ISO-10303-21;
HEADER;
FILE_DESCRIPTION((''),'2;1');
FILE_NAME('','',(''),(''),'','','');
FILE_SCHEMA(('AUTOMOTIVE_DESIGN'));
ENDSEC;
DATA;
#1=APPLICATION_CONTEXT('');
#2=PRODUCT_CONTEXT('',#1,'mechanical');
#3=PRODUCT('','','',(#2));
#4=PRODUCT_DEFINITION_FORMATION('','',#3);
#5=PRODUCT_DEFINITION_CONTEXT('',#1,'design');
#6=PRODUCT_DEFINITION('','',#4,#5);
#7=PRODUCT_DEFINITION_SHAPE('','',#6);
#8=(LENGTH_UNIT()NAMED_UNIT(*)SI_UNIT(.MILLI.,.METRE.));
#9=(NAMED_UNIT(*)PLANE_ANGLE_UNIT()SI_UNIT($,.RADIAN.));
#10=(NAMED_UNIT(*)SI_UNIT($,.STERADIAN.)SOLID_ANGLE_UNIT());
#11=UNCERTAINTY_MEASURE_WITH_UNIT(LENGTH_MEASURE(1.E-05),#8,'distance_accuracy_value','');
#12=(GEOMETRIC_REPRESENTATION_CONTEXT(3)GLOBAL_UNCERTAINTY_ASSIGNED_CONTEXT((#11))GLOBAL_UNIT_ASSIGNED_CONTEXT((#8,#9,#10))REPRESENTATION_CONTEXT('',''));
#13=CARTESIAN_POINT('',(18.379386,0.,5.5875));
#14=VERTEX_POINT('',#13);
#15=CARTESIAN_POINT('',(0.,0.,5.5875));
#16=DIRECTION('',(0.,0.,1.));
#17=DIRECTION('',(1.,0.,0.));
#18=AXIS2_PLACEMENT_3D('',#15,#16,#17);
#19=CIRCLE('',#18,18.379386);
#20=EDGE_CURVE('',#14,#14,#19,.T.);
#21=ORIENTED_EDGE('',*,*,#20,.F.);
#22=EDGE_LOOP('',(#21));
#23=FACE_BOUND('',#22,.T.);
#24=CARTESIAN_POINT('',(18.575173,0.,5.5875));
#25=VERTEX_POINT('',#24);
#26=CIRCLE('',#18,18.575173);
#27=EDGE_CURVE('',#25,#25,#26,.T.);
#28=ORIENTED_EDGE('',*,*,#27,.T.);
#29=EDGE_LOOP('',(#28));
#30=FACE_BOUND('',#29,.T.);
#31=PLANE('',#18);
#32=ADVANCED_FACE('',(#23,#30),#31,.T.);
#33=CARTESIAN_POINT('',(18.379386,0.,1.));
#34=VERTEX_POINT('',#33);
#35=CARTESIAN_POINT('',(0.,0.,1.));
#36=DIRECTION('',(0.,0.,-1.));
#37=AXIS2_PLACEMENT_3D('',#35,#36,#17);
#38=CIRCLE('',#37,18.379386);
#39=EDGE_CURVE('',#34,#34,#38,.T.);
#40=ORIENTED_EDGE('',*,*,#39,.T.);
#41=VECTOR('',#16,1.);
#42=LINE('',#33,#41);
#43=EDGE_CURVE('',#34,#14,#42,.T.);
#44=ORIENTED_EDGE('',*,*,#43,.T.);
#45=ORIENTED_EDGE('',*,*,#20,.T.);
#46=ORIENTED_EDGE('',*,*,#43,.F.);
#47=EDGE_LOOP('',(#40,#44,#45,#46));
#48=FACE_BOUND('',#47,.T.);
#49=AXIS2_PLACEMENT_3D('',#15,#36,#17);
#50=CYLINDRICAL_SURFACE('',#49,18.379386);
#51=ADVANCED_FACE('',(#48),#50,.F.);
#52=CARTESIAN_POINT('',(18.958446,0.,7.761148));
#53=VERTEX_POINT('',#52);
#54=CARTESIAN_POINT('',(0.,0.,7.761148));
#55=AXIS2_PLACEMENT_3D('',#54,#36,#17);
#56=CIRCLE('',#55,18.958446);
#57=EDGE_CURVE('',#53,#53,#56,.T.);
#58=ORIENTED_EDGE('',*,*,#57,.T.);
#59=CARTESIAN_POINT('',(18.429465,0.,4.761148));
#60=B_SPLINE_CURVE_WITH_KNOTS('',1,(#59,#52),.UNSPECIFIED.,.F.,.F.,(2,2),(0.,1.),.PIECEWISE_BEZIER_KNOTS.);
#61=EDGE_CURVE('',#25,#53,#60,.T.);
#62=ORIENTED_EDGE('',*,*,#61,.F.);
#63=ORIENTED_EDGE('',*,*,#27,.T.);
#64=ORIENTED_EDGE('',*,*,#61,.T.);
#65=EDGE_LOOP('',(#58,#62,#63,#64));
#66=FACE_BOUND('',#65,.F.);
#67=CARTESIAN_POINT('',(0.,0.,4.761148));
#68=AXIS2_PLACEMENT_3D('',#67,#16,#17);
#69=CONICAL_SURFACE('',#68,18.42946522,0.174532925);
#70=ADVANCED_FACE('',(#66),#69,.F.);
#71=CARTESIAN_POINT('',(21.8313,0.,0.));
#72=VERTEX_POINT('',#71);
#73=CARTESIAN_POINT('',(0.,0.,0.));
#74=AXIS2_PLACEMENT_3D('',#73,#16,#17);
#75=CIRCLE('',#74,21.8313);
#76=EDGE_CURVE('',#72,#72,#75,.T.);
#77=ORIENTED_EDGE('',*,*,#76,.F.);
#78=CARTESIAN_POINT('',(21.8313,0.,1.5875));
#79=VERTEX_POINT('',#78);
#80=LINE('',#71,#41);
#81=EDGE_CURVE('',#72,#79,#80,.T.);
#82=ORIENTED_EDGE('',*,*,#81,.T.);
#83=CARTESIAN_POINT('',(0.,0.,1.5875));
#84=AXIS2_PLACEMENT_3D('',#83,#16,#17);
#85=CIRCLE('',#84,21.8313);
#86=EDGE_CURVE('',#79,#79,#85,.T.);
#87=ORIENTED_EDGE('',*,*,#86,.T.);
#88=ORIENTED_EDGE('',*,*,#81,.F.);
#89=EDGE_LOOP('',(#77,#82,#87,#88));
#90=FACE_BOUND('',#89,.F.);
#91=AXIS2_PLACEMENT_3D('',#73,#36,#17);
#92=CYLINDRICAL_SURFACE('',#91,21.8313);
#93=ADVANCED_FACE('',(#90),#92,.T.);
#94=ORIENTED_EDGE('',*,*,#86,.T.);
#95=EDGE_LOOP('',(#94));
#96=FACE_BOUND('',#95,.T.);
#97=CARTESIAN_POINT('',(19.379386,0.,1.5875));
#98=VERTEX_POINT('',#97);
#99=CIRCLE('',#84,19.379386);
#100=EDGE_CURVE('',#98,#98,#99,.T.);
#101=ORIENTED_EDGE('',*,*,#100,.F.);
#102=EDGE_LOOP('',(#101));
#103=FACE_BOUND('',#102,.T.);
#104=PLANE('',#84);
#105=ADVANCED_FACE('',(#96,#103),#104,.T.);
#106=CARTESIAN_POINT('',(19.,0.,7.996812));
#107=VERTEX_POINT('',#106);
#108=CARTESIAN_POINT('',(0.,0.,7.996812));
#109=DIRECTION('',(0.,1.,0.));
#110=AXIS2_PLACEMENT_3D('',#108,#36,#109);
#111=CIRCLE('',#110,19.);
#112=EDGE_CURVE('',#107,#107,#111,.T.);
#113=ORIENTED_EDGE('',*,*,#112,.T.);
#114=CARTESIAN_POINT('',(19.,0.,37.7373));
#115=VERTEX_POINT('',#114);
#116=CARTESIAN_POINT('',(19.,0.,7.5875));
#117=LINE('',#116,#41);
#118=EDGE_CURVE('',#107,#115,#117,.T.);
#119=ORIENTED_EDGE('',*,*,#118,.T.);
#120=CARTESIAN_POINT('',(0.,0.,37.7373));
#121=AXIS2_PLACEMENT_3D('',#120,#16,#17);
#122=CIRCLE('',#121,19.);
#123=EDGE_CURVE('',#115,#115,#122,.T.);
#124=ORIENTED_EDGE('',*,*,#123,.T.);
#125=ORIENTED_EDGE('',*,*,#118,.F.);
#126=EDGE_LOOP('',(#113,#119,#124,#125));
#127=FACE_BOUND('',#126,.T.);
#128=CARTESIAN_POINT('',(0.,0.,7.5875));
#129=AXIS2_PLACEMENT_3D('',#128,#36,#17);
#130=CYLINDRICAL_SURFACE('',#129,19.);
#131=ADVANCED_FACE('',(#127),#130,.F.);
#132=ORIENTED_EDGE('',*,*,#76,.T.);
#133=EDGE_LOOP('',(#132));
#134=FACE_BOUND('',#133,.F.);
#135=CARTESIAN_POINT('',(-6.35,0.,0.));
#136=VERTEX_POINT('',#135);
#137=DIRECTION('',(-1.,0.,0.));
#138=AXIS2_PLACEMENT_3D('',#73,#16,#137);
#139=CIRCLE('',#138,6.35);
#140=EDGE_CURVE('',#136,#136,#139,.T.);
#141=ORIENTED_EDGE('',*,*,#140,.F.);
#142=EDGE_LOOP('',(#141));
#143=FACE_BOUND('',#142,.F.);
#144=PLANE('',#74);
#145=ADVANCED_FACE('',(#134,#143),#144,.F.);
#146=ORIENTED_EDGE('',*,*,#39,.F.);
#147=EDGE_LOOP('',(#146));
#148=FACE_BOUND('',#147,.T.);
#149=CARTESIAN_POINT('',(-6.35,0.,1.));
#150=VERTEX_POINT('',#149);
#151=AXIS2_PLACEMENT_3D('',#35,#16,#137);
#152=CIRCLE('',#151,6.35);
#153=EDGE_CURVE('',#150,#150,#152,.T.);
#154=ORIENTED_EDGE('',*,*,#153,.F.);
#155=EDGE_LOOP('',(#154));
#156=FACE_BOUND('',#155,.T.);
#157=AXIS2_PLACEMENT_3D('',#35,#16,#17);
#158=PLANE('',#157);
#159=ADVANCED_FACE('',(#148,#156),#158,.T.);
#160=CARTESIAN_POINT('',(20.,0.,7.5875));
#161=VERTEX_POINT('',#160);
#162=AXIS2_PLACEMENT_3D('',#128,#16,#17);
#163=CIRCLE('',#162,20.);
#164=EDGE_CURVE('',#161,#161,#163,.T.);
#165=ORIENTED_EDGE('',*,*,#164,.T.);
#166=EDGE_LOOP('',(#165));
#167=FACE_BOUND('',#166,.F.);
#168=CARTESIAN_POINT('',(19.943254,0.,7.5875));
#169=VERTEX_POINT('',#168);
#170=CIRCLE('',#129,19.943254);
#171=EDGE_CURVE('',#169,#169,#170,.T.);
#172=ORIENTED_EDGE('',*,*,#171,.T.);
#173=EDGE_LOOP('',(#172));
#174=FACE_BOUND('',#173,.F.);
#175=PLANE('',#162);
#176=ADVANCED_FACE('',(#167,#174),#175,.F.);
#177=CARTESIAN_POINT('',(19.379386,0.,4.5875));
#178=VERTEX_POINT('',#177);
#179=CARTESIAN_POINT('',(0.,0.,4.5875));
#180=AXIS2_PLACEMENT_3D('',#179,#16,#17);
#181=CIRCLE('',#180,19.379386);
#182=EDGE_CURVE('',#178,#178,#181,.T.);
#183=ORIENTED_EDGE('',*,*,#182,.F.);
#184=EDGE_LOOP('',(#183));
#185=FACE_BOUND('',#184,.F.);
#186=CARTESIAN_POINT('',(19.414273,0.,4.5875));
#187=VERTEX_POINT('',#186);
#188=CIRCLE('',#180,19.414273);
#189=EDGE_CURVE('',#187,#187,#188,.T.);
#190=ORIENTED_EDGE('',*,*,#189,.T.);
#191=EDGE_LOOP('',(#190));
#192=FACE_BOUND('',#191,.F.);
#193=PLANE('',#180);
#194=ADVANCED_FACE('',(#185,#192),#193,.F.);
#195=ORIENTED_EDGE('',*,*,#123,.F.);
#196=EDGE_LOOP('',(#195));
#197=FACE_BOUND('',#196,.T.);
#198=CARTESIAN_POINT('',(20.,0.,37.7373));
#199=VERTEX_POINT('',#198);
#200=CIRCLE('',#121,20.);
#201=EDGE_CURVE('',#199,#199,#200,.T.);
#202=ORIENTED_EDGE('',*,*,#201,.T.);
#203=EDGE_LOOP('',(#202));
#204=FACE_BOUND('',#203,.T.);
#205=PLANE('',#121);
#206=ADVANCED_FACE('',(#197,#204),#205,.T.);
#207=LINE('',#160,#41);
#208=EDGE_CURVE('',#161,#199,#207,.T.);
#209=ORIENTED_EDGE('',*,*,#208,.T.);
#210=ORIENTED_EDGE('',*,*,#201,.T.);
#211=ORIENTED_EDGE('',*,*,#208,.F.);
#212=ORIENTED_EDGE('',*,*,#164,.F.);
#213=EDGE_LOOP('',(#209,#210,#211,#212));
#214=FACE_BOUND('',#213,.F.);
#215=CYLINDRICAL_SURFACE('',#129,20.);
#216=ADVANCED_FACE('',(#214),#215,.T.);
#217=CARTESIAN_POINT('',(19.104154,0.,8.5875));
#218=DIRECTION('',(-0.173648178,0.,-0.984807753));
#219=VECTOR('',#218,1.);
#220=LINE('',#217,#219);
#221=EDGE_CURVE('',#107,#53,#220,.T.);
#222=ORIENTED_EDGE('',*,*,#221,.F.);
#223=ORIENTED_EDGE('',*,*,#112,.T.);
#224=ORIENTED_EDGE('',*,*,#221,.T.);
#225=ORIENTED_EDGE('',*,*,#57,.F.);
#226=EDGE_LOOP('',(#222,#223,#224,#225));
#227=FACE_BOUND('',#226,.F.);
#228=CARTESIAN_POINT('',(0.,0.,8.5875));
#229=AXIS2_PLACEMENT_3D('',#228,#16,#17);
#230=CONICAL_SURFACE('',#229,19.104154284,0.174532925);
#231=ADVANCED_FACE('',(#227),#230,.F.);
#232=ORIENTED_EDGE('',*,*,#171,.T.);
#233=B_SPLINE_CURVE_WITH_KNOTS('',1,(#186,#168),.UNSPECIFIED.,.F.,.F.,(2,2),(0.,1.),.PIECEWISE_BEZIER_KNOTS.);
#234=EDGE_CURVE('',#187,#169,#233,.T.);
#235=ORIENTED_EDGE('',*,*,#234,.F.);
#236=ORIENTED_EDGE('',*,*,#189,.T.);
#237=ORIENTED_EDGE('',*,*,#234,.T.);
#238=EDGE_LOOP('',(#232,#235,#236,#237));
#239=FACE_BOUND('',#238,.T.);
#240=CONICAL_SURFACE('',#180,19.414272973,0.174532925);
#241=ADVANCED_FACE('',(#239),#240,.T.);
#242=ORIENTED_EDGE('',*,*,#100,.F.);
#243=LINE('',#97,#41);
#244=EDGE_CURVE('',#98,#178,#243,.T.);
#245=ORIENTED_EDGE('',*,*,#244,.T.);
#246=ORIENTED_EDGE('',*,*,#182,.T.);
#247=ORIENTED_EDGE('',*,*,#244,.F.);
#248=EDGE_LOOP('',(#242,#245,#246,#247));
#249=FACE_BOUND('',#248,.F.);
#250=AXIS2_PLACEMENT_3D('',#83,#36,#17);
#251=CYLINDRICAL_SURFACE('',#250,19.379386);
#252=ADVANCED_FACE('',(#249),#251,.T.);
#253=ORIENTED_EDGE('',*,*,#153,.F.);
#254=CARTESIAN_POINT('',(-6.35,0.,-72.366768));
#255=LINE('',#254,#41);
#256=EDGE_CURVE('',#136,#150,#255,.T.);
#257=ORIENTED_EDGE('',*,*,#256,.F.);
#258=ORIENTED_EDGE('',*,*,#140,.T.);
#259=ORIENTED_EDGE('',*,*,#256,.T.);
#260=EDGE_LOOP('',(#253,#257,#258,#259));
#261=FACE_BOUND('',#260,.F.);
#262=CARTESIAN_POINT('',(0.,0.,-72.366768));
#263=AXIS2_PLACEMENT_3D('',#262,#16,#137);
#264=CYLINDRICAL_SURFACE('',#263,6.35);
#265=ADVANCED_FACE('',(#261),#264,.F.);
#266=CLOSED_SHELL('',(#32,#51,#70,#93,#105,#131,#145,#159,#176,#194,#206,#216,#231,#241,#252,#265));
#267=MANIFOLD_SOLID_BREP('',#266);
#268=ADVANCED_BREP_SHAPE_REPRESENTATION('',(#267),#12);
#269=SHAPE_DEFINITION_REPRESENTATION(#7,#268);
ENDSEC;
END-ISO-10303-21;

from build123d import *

# Parameters (mm, degrees)
F0_R     = 21.8313
F1_DEPTH = 1.5875
F2_R     = 19.3793862589
F3_DEPTH = 3
F4_R     = 19.4142729727
F5_DEPTH = 3
F5_TAPER = -10
F6_R     = 20
F7_DEPTH = 30.1498
F8_T     = 1
F10_D    = 12.7


# Not quite as in the source:
# - a length typed as a fraction of an inch, garbled in the dataset ("3 / 203.2 mm" for 3/8 in), is restored
# - a shell that OpenCascade refuses in one call is made with other operations: the cavity is built on its own and cut out


with BuildPart() as f1:
    # F0 (on Top) → F1 (new body)
    with BuildSketch(Plane.XY):
        Circle(F0_R)
    extrude(amount=F1_DEPTH)

    # F2 (on face) → F3 (join)
    with BuildSketch(Plane.XY.offset(1.5875)):
        Circle(F2_R)
    extrude(amount=F3_DEPTH)

    # F4 (on face) → F5 (join)
    with BuildSketch(Plane.XY.offset(4.5875)):
        Circle(F4_R)
    extrude(amount=F5_DEPTH, taper=F5_TAPER)

    # F6 (on face) → F7 (join)
    with BuildSketch(Plane.XY.offset(7.5875)):
        Circle(F6_R)
    extrude(amount=F7_DEPTH)

    # F8: shell of thickness 1, made by hand


with BuildPart() as f8_core1:
    # F8_t2: copy of F1
    add(f1.part)

    # the walls: a layer under each face that stays
    f8_faces = [f8_core1.faces().sort_by_distance(p)[0] for p in [
        (-20, 0, 22.6624),
        (17.5, -9.6296296296, 7.5875),
        (-19.6787634438, 0, 6.0875),
        (16.9874888511, -9.3476129128, 4.5875),
        (-19.3793862589, 0, 3.0875),
        (-14.5542, -14.5542, 1.5875),
        (-21.8313, 0, 0.79375),
        (0, 0, 0),
    ]]
    thicken(f8_faces, amount=-F8_T, mode=Mode.SUBTRACT)

    # F8_s3 → F8_t4 (revolve, cut)
    with BuildSketch(Plane.XZ):
        Polygon((19.9531019924, 7.5757635182), (19.9432539149, 8.5875), (19.1041542837, 8.5875), (18.9584461618, 7.7611481777), align=None)
    revolve(axis=Axis((0, 0, 7.5875), (0, 0, -1)), mode=Mode.SUBTRACT)

    # F8_s5 → F8_t6 (revolve, cut)
    with BuildSketch(Plane.XZ):
        Polygon((19.3893862589, 4.5775), (19.3793862589, 5.5875), (18.3793862589, 5.5875), (18.3793862589, 4.5875), align=None)
    revolve(axis=Axis((0, 0, 4.5875), (0, 0, 1)), mode=Mode.SUBTRACT)

    # F8_s7 → F8_t8 (revolve, cut)
    with BuildSketch(Plane.XZ):
        Polygon((19.3893862589, 1.5975), (18.3793862589, 1.5875), (18.3793862589, 0.5875), (19.3793862589, 0.5875), align=None)
    revolve(axis=Axis((0, 0, 1.5875), (0, 0, 1)), mode=Mode.SUBTRACT)


with BuildPart() as f1_1:
    add(f1.part)

    # what is left inside the walls is the cavity
    f8_cavity = [f8_core1.part.solids().sort_by_distance(p)[0] for p in [
        (-18.99, 0, 27.823804),
    ]]
    add(f8_cavity, mode=Mode.SUBTRACT)

    # F10 (through all)
    with Locations(Plane(origin=(0, 0, 0), x_dir=(1, 0, 0), z_dir=(0, 0, -1))):
        with Locations((0, 0)):
            Hole(F10_D / 2)


solid = f1_1.part
